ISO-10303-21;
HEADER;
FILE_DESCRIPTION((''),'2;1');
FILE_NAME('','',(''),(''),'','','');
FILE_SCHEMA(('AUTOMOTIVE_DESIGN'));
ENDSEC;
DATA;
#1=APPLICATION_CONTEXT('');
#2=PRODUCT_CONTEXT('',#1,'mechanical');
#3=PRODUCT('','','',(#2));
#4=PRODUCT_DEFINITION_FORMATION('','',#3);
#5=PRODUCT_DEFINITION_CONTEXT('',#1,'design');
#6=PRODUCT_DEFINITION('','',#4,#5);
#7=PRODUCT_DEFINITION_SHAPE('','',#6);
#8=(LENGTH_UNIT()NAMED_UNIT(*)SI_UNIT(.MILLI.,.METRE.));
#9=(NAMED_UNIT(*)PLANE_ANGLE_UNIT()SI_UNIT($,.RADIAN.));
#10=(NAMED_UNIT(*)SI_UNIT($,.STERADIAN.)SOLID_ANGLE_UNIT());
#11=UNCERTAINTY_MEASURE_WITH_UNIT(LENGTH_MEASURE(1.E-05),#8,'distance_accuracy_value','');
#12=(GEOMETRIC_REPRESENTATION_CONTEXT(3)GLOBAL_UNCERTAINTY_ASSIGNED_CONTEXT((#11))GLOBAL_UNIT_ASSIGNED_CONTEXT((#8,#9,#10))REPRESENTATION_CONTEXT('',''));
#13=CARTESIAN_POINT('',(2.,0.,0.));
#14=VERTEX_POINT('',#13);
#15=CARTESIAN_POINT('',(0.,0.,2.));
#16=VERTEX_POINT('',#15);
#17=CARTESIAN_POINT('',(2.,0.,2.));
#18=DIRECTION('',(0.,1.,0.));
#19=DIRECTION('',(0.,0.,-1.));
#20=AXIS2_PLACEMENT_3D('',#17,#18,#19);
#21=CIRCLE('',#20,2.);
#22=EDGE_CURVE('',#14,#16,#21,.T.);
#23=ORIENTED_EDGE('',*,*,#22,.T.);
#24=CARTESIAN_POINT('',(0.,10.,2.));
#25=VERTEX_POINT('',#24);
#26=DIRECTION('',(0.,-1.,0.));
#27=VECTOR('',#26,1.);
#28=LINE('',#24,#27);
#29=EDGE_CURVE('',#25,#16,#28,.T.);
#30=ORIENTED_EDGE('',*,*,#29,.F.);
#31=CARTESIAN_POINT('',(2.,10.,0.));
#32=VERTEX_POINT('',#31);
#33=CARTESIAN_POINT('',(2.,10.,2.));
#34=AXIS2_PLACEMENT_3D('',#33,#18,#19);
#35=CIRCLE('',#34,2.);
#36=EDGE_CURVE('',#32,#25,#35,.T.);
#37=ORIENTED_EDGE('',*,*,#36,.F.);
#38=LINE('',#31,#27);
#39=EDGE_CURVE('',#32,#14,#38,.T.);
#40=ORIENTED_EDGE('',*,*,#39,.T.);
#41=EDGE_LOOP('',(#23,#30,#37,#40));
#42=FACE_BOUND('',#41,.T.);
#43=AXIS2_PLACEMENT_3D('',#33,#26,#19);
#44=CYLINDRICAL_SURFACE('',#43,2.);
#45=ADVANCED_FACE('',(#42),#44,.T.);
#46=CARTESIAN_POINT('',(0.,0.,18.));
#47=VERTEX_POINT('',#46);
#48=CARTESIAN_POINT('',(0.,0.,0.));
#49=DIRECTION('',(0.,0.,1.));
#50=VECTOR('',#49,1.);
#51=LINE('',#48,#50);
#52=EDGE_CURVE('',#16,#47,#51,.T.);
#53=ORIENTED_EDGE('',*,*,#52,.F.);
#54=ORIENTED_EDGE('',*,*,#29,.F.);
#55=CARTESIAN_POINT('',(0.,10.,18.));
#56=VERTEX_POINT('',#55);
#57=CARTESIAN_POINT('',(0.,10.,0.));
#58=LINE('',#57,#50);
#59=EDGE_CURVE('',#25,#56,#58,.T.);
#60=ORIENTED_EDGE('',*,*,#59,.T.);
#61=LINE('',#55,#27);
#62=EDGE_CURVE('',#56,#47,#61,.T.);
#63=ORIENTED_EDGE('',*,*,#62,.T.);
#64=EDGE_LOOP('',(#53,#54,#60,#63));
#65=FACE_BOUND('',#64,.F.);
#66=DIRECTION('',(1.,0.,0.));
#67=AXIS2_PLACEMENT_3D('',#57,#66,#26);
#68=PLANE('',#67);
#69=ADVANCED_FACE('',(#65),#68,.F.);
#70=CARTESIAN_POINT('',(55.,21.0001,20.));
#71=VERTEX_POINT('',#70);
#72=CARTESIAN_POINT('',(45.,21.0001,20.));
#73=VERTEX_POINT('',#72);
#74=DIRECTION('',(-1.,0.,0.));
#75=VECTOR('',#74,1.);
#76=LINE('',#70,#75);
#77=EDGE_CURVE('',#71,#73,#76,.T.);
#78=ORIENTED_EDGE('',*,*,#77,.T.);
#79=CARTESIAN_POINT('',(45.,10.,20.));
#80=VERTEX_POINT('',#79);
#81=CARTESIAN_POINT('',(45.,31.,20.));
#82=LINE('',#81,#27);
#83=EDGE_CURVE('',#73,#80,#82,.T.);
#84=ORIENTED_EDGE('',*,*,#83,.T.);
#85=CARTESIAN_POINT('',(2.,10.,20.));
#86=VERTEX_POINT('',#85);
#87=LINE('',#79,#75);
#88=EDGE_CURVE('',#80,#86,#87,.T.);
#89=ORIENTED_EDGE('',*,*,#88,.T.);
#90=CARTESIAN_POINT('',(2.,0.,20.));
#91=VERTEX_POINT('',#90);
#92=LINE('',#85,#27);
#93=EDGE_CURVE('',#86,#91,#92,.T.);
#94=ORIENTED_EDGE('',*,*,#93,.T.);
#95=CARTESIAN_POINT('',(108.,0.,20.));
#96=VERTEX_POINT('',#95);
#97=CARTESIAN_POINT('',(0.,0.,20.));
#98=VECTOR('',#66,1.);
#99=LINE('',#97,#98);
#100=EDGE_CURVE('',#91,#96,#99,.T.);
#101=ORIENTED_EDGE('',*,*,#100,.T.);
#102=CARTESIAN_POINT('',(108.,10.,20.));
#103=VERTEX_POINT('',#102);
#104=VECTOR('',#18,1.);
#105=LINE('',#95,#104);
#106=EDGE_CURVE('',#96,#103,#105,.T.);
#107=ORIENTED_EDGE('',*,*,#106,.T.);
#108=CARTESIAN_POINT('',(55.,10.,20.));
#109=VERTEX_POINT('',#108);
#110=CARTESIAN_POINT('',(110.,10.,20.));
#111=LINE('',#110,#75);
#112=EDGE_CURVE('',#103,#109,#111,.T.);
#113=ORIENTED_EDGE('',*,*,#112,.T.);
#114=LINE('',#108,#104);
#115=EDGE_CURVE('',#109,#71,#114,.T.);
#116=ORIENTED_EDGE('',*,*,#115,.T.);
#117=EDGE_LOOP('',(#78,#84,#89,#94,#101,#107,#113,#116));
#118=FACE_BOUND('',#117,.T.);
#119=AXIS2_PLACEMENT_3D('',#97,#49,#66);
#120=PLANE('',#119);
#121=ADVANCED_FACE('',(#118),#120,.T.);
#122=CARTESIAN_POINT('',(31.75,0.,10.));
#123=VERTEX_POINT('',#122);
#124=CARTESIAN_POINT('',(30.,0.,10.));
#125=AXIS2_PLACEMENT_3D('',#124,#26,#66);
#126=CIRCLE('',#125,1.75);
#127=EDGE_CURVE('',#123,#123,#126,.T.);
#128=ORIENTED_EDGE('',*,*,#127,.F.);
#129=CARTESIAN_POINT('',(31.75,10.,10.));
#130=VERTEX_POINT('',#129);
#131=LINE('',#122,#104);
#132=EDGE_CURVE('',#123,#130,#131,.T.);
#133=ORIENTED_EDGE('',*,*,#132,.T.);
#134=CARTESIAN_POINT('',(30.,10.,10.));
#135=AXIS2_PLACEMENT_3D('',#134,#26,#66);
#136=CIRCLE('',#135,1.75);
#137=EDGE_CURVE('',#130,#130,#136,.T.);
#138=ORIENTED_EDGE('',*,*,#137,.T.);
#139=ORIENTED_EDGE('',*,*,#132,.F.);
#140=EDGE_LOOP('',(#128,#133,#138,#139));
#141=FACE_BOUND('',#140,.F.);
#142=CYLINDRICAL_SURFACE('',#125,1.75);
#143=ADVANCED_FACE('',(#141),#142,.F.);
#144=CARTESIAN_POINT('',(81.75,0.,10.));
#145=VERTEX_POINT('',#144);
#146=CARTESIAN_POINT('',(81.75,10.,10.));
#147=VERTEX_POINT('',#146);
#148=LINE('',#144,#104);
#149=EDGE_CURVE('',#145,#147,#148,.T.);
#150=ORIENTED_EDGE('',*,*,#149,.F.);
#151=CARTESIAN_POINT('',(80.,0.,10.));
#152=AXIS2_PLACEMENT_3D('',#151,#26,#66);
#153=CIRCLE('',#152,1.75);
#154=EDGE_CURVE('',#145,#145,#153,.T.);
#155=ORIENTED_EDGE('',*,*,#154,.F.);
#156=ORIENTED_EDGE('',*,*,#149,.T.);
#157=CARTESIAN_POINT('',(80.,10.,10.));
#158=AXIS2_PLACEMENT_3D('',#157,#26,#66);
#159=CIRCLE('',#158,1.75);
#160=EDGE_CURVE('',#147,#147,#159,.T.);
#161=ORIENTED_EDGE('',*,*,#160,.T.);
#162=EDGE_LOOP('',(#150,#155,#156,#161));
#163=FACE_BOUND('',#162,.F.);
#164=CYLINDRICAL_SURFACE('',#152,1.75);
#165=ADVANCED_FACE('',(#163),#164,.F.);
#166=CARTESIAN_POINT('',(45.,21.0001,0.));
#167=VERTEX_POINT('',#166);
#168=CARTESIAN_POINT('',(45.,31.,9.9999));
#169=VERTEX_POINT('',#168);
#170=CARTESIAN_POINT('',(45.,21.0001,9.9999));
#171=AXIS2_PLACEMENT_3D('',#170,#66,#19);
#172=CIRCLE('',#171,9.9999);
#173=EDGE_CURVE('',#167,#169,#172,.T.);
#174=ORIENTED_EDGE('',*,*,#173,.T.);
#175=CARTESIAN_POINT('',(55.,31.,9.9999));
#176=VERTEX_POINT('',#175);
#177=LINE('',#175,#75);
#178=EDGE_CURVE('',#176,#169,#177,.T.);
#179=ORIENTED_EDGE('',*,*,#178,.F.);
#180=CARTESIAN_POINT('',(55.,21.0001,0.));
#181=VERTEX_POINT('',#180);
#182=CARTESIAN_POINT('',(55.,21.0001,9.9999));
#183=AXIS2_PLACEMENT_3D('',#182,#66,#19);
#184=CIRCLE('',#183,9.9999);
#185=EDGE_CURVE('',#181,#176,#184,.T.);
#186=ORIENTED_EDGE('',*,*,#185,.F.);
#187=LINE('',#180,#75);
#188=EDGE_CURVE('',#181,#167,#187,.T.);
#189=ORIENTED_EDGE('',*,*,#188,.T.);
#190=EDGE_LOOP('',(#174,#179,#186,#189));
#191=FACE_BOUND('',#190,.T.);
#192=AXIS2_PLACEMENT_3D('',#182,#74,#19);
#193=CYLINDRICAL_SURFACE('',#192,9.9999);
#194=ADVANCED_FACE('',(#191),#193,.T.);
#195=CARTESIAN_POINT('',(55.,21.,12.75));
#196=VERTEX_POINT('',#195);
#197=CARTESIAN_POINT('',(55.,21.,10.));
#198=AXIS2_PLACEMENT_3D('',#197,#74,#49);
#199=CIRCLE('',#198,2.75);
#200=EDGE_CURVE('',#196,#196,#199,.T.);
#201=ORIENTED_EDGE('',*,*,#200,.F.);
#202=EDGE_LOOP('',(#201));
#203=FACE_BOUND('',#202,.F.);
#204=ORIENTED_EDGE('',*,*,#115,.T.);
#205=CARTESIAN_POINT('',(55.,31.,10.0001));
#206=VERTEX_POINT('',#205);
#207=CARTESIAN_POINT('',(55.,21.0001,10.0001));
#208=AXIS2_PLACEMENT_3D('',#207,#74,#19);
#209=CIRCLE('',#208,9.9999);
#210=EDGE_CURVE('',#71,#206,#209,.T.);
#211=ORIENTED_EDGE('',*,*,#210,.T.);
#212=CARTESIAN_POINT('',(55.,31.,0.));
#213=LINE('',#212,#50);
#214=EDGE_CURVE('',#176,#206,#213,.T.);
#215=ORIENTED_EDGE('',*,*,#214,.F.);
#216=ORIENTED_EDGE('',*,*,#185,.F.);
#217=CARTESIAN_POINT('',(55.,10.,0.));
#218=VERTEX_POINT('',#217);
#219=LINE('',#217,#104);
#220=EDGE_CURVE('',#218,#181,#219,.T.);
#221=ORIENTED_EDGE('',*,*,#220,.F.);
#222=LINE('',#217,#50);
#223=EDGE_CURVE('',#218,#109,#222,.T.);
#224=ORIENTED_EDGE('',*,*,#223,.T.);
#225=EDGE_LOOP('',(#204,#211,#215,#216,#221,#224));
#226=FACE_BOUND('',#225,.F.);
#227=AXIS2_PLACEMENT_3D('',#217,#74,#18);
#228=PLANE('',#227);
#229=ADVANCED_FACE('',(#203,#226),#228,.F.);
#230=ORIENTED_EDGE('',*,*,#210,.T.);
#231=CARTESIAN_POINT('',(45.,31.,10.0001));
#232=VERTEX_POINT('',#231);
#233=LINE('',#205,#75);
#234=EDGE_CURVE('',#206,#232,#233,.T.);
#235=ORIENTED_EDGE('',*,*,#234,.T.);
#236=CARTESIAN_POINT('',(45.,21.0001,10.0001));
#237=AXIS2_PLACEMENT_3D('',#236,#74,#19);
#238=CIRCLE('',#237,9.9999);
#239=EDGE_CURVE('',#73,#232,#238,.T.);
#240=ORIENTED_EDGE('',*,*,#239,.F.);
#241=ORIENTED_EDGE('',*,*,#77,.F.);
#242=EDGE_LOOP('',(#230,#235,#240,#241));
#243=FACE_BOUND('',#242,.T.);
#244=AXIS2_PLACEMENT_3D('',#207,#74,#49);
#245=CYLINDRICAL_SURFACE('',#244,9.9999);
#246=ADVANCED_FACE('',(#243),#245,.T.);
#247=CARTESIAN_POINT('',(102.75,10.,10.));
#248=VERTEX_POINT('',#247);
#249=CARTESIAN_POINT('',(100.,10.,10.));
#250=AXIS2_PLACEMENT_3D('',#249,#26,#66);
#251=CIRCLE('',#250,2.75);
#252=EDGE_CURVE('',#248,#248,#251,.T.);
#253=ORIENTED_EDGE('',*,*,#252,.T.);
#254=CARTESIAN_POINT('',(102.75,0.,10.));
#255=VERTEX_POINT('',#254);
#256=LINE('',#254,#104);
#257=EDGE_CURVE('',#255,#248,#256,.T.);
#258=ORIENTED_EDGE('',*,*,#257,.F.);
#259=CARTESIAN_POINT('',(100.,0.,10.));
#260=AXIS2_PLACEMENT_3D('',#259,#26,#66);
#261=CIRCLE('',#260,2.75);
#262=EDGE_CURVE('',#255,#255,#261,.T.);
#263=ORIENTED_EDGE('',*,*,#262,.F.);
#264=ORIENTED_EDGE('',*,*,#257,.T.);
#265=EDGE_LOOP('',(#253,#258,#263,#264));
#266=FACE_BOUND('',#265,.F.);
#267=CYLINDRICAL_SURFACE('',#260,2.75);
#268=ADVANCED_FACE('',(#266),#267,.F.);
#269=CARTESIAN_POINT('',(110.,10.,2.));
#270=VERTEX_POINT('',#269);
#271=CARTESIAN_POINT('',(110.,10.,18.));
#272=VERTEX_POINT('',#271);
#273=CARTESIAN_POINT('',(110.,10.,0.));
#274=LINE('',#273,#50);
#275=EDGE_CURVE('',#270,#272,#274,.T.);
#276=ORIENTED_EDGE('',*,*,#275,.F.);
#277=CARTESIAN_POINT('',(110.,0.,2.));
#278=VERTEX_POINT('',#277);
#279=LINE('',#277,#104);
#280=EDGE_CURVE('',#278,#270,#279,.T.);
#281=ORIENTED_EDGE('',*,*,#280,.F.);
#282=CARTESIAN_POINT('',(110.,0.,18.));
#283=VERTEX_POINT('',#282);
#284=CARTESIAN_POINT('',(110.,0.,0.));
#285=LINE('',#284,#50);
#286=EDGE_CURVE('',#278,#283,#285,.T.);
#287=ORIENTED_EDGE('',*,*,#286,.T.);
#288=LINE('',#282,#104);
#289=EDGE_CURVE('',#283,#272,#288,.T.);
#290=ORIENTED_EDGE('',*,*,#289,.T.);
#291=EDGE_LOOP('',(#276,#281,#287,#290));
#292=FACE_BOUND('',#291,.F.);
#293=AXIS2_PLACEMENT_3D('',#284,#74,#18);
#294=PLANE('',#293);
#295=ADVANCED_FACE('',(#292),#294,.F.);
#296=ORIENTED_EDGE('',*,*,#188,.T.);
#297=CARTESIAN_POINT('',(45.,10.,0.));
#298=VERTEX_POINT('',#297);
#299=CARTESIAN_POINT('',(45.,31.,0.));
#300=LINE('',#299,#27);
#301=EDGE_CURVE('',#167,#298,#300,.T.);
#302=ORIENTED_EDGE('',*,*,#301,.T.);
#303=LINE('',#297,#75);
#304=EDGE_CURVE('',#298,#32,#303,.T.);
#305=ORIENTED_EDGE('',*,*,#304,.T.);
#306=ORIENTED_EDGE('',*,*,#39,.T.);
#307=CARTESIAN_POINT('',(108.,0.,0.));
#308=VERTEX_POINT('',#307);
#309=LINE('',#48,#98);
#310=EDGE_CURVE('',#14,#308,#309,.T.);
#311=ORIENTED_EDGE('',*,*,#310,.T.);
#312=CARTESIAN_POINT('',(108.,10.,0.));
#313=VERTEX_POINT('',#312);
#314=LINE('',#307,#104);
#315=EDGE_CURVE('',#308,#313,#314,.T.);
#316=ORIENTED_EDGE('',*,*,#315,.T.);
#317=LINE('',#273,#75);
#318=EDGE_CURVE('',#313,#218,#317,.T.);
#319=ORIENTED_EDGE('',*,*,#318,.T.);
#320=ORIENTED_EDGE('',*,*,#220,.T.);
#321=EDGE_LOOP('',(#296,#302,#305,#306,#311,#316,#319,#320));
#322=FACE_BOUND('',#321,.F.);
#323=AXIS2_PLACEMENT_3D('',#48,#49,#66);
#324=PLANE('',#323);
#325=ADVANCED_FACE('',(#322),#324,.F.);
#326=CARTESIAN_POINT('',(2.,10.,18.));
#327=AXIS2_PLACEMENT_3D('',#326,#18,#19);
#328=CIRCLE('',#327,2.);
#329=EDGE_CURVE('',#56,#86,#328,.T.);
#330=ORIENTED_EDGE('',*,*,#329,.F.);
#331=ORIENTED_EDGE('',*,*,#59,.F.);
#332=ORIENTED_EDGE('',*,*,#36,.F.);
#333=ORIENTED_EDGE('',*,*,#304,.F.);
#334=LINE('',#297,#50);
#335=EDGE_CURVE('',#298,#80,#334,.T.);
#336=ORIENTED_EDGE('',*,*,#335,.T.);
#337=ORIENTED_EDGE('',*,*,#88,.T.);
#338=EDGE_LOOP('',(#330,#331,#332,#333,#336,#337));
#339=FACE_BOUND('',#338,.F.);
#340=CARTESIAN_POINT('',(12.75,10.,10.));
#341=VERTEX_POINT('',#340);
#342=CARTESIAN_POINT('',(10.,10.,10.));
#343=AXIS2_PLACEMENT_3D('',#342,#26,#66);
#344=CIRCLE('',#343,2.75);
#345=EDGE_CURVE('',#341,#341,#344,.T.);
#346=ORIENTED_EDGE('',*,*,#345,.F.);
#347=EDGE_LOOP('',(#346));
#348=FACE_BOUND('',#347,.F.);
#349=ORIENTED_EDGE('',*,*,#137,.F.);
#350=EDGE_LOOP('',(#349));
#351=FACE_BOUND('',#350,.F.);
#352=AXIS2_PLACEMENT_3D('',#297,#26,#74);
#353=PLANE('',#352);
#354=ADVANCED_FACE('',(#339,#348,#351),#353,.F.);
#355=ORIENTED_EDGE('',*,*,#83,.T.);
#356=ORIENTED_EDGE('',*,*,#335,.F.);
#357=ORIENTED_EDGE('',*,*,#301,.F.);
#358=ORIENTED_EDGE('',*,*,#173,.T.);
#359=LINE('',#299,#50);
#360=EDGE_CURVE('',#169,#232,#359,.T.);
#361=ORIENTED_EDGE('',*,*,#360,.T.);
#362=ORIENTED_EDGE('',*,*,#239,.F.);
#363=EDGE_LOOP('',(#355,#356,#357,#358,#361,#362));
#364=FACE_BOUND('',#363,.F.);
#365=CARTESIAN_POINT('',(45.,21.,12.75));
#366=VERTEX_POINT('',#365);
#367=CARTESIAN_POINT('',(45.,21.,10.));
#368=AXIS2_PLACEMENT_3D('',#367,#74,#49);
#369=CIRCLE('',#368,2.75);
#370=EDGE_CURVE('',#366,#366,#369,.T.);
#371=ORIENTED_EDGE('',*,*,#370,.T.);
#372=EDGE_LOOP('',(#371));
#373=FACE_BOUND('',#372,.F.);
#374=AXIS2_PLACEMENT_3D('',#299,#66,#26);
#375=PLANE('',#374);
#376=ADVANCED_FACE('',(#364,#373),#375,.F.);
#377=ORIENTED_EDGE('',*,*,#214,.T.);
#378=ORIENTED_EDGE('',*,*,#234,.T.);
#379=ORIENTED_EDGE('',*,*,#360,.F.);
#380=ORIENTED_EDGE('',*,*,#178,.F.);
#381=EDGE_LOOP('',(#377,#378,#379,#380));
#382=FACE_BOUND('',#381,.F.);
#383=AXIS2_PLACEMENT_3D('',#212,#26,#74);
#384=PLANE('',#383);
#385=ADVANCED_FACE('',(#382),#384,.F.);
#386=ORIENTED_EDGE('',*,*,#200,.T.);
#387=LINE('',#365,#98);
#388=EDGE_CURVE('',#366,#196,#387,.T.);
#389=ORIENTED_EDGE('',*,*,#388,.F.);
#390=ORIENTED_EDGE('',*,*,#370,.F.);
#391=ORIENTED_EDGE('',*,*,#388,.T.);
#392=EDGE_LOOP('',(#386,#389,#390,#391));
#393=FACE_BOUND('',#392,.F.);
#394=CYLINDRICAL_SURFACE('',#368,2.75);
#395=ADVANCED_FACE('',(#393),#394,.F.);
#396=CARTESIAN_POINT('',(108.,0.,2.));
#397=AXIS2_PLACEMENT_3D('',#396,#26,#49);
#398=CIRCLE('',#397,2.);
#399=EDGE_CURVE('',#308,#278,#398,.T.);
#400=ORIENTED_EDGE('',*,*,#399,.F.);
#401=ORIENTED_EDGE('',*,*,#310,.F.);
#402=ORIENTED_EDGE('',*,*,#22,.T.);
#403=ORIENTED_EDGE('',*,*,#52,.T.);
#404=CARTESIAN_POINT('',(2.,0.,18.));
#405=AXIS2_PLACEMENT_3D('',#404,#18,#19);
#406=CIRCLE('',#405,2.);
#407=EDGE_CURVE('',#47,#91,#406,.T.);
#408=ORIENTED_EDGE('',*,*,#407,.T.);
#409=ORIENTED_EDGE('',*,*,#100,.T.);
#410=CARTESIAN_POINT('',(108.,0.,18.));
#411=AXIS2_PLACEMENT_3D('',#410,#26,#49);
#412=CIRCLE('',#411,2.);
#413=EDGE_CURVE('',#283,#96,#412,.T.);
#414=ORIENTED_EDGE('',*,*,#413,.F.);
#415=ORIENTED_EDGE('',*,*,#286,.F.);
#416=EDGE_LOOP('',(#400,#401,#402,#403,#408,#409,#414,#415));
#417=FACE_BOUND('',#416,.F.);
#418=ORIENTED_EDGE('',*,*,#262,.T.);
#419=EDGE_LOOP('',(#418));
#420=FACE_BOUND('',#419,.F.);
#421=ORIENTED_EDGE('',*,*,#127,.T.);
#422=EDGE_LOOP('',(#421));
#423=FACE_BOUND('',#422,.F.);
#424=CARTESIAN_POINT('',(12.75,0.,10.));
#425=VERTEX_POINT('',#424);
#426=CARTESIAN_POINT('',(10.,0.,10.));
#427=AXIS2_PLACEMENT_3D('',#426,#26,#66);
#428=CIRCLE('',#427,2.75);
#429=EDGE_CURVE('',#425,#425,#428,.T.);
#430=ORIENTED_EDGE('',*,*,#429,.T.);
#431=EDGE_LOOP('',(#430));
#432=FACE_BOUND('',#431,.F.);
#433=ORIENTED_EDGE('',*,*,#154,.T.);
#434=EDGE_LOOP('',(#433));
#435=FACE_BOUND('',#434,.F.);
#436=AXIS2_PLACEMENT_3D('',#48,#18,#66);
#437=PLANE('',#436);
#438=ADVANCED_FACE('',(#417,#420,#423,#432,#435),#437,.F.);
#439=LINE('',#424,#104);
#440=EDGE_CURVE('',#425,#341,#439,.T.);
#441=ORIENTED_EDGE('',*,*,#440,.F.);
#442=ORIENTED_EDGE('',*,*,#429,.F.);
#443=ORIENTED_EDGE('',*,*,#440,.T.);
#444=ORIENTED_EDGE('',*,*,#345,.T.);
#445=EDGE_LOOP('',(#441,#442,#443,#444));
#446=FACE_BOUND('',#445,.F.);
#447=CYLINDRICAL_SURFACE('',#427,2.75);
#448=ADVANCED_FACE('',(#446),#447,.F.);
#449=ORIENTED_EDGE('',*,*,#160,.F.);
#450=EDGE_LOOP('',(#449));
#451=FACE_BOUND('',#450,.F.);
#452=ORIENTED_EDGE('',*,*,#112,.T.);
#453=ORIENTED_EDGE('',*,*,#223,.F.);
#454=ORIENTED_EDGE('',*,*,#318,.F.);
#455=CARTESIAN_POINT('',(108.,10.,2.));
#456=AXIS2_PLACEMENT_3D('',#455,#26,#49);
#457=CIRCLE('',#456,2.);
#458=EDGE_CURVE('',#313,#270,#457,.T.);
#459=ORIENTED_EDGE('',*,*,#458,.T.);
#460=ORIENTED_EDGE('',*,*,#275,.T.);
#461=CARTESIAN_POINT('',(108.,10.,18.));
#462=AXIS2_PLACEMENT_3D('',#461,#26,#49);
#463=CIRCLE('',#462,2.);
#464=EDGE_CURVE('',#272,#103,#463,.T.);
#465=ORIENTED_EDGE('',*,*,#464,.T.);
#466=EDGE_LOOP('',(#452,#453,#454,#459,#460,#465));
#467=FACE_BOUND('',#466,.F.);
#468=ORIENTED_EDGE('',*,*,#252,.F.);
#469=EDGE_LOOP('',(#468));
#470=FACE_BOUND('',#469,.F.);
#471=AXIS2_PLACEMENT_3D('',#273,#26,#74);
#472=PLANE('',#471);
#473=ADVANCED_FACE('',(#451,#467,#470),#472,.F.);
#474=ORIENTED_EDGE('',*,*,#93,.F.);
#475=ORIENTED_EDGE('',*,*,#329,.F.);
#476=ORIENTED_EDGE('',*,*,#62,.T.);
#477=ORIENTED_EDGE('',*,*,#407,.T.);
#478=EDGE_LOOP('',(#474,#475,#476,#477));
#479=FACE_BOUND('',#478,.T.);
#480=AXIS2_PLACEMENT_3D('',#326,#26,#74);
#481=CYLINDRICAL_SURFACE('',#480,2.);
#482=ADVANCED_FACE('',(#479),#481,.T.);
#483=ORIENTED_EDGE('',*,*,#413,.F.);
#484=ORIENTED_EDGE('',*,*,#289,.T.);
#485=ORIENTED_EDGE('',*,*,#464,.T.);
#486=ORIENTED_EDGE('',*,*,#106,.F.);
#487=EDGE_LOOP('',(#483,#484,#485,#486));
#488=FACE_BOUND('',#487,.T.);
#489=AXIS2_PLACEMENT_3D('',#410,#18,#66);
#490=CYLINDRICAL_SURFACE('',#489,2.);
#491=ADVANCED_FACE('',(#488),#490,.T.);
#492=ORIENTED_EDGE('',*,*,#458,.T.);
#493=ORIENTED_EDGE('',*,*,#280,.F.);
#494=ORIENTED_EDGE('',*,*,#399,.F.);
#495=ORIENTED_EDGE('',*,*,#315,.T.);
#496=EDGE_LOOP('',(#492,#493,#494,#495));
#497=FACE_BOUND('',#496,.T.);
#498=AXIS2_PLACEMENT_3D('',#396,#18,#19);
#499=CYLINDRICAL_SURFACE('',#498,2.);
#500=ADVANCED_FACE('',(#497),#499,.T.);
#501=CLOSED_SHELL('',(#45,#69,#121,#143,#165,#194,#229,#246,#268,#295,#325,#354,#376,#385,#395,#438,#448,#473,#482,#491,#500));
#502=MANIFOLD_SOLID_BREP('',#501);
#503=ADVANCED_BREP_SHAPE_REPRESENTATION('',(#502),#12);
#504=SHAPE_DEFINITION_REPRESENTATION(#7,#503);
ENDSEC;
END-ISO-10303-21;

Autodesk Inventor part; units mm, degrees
ref_plane "YZ Plane" through (0, 0, 0) normal (1, 0, 0) x (0, 1, 0)
ref_plane "XZ Plane" through (0, 0, 0) normal (0, 1, 0) x (-1, 0, 0)
ref_plane "XY Plane" through (0, 0, 0) normal (0, 0, 1) x (1, 0, 0)
sketch "スケッチ1" plane through (0, 0, 0) normal (0, 0, 1) x (1, 0, 0)
  line L0 (0, 0) -> (110, 0)
  line L1 (110, 0) -> (110, 10)
  line L2 (110, 10) -> (55, 10)
  line L3 (55, 10) -> (55, 31)
  line L4 (55, 31) -> (45, 31)
  line L5 (45, 31) -> (45, 10)
  line L6 (45, 10) -> (0, 10)
  line L7 (0, 10) -> (0, 0)
  dimension "d0" = 110
  dimension "d1" = 10
  dimension "d2" = 21
  dimension "d3" = 10
  dimension "d4" = 45
extrude "押し出し1" add sketch "スケッチ1" along normal blind 20
sketch "スケッチ2" plane through (0, 0, 0) normal (0, -1, 0) x (1, 0, 0)
  line L0 (110, 0) -> (110, 20) construction
  line L1 (110, 10) -> (0, 10) construction
  line L2 (0, 0) -> (0, 20) construction
  circle A0 centre (100, 10) radius 2.75
  circle A1 centre (10, 10) radius 2.75
  line L3 (0, 0) -> (110, 0) construction
  line L4 (55, 0) -> (55, 20) construction
  line L5 (0, 20) -> (110, 20) construction
  circle A2 centre (80, 10) radius 1.75
  circle A3 centre (30, 10) radius 1.75
  dimension "d7" = 5.5
  dimension "d8" = 10
  dimension "d9" = 10
  dimension "d17" = 3.5
  dimension "d18" = 50
extrude "押し出し2" cut sketch "スケッチ2" against normal through all
sketch "スケッチ3" plane through (45, 10, 0) normal (-1, 0, 0) x (0, 0, 1)
  line L0 (0, 21) -> (20, 21) construction
  line L1 (10, 21) -> (10, 0) construction
  line L2 (0, 0) -> (20, 0) construction
  circle A0 centre (10, 11) radius 2.75
  point P0 (0, -10)
  dimension "d12" = 10
  dimension "d13" = 5.5
extrude "押し出し3" cut sketch "スケッチ3" against normal through all
fillet "フィレット1" radius 10 2 edges at (50, 31, 0) (50, 31, 20)
fillet "フィレット2" radius 2 4 edges at (110, 5, 20) (110, 5, 0) (0, 5, 0) (0, 5, 20)
properties part number "_3D プリント"
